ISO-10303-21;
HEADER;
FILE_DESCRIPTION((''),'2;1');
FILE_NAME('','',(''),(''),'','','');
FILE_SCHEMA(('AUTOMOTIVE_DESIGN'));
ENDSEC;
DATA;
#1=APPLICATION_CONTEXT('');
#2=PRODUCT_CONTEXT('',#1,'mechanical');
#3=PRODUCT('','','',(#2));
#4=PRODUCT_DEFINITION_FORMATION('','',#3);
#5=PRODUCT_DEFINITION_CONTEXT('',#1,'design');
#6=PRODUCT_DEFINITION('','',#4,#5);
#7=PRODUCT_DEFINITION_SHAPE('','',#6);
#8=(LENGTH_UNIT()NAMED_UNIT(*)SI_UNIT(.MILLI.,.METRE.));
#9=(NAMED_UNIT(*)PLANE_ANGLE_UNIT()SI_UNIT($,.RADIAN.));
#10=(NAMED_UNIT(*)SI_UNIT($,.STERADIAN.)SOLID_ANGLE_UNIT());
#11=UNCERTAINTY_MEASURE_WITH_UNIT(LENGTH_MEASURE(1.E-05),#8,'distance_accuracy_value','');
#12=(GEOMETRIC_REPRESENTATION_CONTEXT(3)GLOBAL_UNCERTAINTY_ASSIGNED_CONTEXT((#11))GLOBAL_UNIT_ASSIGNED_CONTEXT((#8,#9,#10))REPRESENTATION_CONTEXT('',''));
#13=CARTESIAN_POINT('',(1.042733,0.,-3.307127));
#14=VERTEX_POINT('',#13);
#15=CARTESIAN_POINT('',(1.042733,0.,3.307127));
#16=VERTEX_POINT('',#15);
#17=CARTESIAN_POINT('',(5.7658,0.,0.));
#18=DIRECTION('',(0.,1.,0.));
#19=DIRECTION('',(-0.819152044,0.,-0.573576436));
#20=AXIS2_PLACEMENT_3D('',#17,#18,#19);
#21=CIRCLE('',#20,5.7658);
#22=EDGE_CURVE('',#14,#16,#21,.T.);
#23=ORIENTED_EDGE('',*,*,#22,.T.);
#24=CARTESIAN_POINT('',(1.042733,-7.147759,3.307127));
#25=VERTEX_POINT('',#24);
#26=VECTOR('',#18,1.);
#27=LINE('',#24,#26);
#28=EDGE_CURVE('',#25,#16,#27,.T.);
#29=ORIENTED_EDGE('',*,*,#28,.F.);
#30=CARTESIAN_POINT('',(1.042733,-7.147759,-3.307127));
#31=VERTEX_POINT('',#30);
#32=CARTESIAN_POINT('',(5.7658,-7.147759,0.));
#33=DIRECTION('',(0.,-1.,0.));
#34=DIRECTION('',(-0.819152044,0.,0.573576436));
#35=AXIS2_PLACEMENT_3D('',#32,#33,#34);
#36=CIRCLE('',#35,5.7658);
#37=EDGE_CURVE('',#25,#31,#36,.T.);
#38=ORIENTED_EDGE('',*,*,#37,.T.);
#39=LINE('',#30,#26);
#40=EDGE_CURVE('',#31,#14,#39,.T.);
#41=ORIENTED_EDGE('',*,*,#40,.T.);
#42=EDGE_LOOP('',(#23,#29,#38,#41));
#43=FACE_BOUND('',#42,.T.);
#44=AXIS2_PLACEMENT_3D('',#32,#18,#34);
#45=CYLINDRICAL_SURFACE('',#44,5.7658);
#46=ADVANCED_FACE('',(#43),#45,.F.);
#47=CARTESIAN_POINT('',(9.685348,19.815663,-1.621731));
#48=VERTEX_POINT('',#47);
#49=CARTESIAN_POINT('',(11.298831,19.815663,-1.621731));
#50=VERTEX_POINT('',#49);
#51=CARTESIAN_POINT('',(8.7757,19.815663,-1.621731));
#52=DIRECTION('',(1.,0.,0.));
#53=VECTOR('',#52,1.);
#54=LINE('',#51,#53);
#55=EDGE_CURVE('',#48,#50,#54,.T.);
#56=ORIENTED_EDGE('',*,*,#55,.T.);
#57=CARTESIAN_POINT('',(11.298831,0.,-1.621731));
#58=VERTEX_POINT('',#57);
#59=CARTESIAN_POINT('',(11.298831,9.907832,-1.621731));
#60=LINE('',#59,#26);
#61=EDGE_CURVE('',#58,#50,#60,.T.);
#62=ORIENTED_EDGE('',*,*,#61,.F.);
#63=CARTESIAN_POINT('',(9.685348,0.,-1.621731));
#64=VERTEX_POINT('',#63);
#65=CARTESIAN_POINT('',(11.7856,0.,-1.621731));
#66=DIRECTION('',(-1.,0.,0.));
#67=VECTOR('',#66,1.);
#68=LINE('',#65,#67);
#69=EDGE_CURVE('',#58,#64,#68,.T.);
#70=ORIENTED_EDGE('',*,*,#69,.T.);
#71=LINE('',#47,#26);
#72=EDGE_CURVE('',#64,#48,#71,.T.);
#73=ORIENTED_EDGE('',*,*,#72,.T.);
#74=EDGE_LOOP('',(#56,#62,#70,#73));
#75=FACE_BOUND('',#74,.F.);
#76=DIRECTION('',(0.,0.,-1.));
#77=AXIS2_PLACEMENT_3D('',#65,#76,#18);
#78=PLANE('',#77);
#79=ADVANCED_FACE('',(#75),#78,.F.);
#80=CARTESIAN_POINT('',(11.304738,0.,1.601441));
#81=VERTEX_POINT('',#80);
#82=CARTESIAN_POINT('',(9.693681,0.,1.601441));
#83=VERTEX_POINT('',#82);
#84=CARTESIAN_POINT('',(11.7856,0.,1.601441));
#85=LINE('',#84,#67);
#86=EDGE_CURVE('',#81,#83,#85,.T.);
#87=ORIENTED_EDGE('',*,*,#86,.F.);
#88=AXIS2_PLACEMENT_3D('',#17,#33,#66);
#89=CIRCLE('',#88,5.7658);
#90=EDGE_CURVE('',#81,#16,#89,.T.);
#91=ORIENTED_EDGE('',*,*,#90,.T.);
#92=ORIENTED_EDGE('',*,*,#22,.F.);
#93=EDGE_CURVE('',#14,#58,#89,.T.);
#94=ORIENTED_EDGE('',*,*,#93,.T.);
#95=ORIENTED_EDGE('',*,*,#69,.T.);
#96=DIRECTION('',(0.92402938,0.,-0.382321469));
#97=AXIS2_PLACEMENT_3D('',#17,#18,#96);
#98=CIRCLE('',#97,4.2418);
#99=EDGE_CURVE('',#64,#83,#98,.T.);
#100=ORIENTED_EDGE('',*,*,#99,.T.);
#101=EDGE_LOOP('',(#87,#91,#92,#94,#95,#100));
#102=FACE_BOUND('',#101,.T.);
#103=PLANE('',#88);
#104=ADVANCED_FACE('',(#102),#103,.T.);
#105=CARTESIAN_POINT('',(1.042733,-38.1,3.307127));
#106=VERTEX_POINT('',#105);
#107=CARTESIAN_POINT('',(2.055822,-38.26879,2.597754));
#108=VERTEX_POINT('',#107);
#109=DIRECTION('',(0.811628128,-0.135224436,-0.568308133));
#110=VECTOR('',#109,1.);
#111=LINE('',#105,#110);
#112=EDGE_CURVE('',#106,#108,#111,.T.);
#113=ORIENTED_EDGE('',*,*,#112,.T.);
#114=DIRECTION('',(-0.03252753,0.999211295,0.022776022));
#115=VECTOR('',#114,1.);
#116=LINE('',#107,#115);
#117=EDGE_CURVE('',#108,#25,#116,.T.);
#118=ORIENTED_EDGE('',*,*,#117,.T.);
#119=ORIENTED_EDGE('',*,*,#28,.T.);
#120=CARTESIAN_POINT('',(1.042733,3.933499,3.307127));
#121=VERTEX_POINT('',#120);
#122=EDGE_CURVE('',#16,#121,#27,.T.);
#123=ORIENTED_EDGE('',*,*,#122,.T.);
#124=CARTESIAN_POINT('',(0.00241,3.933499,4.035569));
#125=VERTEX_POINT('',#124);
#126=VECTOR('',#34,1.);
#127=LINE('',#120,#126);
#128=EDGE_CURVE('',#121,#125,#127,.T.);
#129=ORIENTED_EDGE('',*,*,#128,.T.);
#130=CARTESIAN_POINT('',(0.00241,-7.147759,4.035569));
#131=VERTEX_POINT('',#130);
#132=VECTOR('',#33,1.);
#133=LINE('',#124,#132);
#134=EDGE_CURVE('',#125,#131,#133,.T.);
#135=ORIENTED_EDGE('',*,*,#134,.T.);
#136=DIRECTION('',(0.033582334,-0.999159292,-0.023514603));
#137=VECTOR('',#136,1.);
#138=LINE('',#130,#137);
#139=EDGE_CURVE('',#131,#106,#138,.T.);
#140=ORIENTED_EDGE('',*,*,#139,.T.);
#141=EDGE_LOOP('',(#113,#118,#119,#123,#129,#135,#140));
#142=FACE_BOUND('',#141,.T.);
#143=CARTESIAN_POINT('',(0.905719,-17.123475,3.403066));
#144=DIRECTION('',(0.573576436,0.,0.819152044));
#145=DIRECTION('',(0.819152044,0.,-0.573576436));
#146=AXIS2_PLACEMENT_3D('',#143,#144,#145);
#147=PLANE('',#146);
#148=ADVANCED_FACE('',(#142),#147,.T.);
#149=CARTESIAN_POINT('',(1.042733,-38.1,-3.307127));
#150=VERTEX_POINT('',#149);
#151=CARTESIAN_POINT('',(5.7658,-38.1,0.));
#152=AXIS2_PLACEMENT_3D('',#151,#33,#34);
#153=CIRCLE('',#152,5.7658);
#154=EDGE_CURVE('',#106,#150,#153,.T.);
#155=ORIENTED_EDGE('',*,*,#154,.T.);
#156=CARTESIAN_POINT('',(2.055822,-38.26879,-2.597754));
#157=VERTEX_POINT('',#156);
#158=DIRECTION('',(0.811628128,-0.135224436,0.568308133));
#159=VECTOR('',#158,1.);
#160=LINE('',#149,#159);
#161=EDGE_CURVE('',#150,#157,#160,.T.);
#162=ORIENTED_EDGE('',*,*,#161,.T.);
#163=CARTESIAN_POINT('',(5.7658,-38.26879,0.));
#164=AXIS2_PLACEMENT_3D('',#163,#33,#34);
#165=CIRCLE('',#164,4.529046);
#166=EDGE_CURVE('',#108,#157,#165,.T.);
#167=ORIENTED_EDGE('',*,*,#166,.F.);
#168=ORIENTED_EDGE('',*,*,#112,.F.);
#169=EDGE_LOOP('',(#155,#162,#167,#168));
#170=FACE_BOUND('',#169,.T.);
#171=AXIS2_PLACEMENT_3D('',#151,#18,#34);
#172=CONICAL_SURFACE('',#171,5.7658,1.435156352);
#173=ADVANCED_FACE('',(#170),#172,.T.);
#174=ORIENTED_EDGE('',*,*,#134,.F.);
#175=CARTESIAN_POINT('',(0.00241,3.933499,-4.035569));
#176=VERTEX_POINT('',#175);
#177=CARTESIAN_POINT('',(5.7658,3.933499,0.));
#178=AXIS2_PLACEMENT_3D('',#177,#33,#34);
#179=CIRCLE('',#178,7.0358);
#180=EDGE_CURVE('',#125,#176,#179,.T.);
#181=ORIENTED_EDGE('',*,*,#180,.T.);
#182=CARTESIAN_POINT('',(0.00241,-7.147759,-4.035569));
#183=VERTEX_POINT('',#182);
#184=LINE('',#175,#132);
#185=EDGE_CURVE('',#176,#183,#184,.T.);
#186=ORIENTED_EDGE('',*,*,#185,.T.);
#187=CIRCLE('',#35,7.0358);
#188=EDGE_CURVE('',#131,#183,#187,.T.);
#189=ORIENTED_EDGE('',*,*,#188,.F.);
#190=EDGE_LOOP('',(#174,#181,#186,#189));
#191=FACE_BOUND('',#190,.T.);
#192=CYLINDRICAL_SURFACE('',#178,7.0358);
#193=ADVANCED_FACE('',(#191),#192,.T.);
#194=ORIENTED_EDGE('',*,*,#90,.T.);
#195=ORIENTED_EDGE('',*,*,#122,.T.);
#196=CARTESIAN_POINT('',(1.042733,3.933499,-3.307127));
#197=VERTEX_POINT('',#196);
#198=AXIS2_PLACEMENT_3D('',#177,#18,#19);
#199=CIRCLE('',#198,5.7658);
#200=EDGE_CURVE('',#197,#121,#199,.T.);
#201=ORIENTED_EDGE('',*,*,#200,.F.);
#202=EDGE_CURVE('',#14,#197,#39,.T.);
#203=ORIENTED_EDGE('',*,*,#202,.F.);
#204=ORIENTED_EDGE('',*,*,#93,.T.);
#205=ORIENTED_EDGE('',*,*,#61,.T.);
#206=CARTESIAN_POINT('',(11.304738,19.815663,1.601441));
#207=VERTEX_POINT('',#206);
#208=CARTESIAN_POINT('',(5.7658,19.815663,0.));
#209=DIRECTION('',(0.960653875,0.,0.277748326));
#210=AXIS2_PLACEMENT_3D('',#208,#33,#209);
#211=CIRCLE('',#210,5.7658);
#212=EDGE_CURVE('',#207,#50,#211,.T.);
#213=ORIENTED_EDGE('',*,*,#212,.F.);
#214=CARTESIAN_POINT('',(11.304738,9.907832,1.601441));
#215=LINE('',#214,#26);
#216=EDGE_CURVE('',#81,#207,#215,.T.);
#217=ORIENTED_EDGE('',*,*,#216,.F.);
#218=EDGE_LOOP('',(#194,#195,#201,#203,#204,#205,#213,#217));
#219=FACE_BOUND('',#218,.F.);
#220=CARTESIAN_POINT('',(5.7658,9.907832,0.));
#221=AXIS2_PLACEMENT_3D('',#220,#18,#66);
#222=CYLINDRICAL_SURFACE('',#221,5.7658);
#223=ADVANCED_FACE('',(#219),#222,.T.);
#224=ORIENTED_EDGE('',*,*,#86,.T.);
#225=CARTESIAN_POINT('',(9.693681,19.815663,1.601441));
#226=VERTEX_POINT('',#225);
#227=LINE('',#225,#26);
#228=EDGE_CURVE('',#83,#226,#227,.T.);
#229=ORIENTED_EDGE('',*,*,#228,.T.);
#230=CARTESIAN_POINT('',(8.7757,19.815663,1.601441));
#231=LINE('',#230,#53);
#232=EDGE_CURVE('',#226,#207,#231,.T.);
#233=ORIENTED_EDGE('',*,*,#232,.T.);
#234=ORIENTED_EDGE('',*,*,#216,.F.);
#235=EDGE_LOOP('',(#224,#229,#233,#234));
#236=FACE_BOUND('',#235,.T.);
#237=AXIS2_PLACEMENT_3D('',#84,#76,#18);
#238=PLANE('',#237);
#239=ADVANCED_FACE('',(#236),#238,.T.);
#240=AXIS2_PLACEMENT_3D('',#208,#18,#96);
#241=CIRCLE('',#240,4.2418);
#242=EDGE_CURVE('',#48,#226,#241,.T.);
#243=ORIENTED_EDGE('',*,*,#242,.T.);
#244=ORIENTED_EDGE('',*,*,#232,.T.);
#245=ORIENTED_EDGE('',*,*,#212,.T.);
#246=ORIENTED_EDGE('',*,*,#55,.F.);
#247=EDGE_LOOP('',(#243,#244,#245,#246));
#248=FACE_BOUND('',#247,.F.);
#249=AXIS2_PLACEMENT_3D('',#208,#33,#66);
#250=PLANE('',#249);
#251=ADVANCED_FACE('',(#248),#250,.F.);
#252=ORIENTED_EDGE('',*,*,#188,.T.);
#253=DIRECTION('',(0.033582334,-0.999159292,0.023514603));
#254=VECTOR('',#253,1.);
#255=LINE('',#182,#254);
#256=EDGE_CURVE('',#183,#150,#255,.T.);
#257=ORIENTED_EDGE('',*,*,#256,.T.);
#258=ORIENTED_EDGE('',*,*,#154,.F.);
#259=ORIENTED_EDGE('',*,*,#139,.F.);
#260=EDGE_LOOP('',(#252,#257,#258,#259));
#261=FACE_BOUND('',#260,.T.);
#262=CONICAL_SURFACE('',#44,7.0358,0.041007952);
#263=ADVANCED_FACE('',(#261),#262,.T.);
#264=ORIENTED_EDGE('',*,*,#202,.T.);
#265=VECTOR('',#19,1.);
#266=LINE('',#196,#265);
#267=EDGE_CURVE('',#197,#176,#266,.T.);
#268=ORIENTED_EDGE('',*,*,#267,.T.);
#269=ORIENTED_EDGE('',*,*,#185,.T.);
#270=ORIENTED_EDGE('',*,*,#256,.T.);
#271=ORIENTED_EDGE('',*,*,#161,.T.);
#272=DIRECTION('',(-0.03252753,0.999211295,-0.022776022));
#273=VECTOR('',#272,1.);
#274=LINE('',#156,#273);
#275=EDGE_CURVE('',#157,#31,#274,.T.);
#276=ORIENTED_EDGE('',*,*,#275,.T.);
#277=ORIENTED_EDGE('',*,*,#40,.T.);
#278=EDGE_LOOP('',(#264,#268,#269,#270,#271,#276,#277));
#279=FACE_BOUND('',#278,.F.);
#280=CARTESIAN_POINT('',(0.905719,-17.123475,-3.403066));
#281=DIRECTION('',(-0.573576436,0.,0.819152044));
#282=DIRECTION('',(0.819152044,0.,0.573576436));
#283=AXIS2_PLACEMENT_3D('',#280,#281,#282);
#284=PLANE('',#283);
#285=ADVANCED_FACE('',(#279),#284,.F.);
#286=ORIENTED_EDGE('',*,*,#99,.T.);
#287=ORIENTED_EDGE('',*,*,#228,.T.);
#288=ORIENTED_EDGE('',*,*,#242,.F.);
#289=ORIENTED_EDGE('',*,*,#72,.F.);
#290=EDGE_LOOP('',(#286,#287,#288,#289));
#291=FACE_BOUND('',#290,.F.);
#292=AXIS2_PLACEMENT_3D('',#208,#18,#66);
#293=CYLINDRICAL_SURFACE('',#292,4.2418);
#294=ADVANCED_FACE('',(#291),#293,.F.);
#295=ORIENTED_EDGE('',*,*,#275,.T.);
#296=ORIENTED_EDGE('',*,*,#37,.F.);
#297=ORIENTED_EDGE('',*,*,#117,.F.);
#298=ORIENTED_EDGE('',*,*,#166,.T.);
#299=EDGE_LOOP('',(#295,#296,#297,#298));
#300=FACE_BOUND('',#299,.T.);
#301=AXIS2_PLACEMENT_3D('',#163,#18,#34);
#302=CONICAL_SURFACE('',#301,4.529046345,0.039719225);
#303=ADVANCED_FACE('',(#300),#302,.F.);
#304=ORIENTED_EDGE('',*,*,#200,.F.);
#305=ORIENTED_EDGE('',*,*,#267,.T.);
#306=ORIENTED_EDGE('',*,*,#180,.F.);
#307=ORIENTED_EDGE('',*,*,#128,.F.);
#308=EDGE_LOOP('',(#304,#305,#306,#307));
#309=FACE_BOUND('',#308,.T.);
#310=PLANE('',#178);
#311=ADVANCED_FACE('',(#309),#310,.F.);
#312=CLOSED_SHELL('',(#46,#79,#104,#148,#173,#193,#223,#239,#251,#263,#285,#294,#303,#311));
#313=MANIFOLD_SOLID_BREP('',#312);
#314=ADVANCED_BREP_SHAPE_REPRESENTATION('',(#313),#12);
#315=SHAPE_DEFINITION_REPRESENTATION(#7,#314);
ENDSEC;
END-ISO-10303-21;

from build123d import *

# Parameters (mm, degrees)
F0_W          = 5.7658
F0_H          = 19.8156631229
F2_R          = 4.2418
F3_DEPTH      = 19.8166631229
F5_ANGLE_BACK = 35
F5_ANGLE      = 70
F7_W          = 19.842395559
F7_H          = 3.2231725054
F8_DEPTH      = 2.54


# Not quite as in the source:
# - a feature names something its author has since deleted; it is built from what else it names


with BuildPart() as f1:
    # F0 (on Top) → F1 (revolve)
    with BuildSketch(Plane.XY):
        with Locations((2.8829, 9.9078315614)):
            Rectangle(F0_W, F0_H)
    revolve(axis=Axis((5.7658, 9.9078315614, 0), (0, -1, 0)))

    # F2 (on face) → F3 (cut, through all)
    with BuildSketch(Plane(origin=(0, 19.8156631229, 0), x_dir=(-1, 0, 0), z_dir=(0, 1, 0))):
        with Locations((-5.7658, 0)):
            Circle(F2_R)
    extrude(amount=-F3_DEPTH, mode=Mode.SUBTRACT)

    # F4 (on Top) → F5 (revolve)
    with BuildSketch(Plane.XY, mode=Mode.PRIVATE) as f5_sk:
        Polygon((0, -7.1477591426), (0, 0), (0, 3.933498799), (-1.27, 3.933498799), (-1.27, 0), (-1.27, -7.1477591426), (0, -38.1), (1.2367536547, -38.268789649), align=None)
    revolve(f5_sk.sketch.rotate(Axis((5.7658, 11.3838200413, 0), (0, -1, 0)), -F5_ANGLE_BACK), axis=Axis((5.7658, 11.3838200413, 0), (0, -1, 0)), revolution_arc=F5_ANGLE)

    # F7 (on offset) → F8 (cut)
    with BuildSketch(Plane.YZ.offset(11.7856)):
        with Locations((9.9211977795, -0.010144955)):
            Rectangle(F7_W, F7_H)
    extrude(amount=-F8_DEPTH, mode=Mode.SUBTRACT)


solid = f1.part
